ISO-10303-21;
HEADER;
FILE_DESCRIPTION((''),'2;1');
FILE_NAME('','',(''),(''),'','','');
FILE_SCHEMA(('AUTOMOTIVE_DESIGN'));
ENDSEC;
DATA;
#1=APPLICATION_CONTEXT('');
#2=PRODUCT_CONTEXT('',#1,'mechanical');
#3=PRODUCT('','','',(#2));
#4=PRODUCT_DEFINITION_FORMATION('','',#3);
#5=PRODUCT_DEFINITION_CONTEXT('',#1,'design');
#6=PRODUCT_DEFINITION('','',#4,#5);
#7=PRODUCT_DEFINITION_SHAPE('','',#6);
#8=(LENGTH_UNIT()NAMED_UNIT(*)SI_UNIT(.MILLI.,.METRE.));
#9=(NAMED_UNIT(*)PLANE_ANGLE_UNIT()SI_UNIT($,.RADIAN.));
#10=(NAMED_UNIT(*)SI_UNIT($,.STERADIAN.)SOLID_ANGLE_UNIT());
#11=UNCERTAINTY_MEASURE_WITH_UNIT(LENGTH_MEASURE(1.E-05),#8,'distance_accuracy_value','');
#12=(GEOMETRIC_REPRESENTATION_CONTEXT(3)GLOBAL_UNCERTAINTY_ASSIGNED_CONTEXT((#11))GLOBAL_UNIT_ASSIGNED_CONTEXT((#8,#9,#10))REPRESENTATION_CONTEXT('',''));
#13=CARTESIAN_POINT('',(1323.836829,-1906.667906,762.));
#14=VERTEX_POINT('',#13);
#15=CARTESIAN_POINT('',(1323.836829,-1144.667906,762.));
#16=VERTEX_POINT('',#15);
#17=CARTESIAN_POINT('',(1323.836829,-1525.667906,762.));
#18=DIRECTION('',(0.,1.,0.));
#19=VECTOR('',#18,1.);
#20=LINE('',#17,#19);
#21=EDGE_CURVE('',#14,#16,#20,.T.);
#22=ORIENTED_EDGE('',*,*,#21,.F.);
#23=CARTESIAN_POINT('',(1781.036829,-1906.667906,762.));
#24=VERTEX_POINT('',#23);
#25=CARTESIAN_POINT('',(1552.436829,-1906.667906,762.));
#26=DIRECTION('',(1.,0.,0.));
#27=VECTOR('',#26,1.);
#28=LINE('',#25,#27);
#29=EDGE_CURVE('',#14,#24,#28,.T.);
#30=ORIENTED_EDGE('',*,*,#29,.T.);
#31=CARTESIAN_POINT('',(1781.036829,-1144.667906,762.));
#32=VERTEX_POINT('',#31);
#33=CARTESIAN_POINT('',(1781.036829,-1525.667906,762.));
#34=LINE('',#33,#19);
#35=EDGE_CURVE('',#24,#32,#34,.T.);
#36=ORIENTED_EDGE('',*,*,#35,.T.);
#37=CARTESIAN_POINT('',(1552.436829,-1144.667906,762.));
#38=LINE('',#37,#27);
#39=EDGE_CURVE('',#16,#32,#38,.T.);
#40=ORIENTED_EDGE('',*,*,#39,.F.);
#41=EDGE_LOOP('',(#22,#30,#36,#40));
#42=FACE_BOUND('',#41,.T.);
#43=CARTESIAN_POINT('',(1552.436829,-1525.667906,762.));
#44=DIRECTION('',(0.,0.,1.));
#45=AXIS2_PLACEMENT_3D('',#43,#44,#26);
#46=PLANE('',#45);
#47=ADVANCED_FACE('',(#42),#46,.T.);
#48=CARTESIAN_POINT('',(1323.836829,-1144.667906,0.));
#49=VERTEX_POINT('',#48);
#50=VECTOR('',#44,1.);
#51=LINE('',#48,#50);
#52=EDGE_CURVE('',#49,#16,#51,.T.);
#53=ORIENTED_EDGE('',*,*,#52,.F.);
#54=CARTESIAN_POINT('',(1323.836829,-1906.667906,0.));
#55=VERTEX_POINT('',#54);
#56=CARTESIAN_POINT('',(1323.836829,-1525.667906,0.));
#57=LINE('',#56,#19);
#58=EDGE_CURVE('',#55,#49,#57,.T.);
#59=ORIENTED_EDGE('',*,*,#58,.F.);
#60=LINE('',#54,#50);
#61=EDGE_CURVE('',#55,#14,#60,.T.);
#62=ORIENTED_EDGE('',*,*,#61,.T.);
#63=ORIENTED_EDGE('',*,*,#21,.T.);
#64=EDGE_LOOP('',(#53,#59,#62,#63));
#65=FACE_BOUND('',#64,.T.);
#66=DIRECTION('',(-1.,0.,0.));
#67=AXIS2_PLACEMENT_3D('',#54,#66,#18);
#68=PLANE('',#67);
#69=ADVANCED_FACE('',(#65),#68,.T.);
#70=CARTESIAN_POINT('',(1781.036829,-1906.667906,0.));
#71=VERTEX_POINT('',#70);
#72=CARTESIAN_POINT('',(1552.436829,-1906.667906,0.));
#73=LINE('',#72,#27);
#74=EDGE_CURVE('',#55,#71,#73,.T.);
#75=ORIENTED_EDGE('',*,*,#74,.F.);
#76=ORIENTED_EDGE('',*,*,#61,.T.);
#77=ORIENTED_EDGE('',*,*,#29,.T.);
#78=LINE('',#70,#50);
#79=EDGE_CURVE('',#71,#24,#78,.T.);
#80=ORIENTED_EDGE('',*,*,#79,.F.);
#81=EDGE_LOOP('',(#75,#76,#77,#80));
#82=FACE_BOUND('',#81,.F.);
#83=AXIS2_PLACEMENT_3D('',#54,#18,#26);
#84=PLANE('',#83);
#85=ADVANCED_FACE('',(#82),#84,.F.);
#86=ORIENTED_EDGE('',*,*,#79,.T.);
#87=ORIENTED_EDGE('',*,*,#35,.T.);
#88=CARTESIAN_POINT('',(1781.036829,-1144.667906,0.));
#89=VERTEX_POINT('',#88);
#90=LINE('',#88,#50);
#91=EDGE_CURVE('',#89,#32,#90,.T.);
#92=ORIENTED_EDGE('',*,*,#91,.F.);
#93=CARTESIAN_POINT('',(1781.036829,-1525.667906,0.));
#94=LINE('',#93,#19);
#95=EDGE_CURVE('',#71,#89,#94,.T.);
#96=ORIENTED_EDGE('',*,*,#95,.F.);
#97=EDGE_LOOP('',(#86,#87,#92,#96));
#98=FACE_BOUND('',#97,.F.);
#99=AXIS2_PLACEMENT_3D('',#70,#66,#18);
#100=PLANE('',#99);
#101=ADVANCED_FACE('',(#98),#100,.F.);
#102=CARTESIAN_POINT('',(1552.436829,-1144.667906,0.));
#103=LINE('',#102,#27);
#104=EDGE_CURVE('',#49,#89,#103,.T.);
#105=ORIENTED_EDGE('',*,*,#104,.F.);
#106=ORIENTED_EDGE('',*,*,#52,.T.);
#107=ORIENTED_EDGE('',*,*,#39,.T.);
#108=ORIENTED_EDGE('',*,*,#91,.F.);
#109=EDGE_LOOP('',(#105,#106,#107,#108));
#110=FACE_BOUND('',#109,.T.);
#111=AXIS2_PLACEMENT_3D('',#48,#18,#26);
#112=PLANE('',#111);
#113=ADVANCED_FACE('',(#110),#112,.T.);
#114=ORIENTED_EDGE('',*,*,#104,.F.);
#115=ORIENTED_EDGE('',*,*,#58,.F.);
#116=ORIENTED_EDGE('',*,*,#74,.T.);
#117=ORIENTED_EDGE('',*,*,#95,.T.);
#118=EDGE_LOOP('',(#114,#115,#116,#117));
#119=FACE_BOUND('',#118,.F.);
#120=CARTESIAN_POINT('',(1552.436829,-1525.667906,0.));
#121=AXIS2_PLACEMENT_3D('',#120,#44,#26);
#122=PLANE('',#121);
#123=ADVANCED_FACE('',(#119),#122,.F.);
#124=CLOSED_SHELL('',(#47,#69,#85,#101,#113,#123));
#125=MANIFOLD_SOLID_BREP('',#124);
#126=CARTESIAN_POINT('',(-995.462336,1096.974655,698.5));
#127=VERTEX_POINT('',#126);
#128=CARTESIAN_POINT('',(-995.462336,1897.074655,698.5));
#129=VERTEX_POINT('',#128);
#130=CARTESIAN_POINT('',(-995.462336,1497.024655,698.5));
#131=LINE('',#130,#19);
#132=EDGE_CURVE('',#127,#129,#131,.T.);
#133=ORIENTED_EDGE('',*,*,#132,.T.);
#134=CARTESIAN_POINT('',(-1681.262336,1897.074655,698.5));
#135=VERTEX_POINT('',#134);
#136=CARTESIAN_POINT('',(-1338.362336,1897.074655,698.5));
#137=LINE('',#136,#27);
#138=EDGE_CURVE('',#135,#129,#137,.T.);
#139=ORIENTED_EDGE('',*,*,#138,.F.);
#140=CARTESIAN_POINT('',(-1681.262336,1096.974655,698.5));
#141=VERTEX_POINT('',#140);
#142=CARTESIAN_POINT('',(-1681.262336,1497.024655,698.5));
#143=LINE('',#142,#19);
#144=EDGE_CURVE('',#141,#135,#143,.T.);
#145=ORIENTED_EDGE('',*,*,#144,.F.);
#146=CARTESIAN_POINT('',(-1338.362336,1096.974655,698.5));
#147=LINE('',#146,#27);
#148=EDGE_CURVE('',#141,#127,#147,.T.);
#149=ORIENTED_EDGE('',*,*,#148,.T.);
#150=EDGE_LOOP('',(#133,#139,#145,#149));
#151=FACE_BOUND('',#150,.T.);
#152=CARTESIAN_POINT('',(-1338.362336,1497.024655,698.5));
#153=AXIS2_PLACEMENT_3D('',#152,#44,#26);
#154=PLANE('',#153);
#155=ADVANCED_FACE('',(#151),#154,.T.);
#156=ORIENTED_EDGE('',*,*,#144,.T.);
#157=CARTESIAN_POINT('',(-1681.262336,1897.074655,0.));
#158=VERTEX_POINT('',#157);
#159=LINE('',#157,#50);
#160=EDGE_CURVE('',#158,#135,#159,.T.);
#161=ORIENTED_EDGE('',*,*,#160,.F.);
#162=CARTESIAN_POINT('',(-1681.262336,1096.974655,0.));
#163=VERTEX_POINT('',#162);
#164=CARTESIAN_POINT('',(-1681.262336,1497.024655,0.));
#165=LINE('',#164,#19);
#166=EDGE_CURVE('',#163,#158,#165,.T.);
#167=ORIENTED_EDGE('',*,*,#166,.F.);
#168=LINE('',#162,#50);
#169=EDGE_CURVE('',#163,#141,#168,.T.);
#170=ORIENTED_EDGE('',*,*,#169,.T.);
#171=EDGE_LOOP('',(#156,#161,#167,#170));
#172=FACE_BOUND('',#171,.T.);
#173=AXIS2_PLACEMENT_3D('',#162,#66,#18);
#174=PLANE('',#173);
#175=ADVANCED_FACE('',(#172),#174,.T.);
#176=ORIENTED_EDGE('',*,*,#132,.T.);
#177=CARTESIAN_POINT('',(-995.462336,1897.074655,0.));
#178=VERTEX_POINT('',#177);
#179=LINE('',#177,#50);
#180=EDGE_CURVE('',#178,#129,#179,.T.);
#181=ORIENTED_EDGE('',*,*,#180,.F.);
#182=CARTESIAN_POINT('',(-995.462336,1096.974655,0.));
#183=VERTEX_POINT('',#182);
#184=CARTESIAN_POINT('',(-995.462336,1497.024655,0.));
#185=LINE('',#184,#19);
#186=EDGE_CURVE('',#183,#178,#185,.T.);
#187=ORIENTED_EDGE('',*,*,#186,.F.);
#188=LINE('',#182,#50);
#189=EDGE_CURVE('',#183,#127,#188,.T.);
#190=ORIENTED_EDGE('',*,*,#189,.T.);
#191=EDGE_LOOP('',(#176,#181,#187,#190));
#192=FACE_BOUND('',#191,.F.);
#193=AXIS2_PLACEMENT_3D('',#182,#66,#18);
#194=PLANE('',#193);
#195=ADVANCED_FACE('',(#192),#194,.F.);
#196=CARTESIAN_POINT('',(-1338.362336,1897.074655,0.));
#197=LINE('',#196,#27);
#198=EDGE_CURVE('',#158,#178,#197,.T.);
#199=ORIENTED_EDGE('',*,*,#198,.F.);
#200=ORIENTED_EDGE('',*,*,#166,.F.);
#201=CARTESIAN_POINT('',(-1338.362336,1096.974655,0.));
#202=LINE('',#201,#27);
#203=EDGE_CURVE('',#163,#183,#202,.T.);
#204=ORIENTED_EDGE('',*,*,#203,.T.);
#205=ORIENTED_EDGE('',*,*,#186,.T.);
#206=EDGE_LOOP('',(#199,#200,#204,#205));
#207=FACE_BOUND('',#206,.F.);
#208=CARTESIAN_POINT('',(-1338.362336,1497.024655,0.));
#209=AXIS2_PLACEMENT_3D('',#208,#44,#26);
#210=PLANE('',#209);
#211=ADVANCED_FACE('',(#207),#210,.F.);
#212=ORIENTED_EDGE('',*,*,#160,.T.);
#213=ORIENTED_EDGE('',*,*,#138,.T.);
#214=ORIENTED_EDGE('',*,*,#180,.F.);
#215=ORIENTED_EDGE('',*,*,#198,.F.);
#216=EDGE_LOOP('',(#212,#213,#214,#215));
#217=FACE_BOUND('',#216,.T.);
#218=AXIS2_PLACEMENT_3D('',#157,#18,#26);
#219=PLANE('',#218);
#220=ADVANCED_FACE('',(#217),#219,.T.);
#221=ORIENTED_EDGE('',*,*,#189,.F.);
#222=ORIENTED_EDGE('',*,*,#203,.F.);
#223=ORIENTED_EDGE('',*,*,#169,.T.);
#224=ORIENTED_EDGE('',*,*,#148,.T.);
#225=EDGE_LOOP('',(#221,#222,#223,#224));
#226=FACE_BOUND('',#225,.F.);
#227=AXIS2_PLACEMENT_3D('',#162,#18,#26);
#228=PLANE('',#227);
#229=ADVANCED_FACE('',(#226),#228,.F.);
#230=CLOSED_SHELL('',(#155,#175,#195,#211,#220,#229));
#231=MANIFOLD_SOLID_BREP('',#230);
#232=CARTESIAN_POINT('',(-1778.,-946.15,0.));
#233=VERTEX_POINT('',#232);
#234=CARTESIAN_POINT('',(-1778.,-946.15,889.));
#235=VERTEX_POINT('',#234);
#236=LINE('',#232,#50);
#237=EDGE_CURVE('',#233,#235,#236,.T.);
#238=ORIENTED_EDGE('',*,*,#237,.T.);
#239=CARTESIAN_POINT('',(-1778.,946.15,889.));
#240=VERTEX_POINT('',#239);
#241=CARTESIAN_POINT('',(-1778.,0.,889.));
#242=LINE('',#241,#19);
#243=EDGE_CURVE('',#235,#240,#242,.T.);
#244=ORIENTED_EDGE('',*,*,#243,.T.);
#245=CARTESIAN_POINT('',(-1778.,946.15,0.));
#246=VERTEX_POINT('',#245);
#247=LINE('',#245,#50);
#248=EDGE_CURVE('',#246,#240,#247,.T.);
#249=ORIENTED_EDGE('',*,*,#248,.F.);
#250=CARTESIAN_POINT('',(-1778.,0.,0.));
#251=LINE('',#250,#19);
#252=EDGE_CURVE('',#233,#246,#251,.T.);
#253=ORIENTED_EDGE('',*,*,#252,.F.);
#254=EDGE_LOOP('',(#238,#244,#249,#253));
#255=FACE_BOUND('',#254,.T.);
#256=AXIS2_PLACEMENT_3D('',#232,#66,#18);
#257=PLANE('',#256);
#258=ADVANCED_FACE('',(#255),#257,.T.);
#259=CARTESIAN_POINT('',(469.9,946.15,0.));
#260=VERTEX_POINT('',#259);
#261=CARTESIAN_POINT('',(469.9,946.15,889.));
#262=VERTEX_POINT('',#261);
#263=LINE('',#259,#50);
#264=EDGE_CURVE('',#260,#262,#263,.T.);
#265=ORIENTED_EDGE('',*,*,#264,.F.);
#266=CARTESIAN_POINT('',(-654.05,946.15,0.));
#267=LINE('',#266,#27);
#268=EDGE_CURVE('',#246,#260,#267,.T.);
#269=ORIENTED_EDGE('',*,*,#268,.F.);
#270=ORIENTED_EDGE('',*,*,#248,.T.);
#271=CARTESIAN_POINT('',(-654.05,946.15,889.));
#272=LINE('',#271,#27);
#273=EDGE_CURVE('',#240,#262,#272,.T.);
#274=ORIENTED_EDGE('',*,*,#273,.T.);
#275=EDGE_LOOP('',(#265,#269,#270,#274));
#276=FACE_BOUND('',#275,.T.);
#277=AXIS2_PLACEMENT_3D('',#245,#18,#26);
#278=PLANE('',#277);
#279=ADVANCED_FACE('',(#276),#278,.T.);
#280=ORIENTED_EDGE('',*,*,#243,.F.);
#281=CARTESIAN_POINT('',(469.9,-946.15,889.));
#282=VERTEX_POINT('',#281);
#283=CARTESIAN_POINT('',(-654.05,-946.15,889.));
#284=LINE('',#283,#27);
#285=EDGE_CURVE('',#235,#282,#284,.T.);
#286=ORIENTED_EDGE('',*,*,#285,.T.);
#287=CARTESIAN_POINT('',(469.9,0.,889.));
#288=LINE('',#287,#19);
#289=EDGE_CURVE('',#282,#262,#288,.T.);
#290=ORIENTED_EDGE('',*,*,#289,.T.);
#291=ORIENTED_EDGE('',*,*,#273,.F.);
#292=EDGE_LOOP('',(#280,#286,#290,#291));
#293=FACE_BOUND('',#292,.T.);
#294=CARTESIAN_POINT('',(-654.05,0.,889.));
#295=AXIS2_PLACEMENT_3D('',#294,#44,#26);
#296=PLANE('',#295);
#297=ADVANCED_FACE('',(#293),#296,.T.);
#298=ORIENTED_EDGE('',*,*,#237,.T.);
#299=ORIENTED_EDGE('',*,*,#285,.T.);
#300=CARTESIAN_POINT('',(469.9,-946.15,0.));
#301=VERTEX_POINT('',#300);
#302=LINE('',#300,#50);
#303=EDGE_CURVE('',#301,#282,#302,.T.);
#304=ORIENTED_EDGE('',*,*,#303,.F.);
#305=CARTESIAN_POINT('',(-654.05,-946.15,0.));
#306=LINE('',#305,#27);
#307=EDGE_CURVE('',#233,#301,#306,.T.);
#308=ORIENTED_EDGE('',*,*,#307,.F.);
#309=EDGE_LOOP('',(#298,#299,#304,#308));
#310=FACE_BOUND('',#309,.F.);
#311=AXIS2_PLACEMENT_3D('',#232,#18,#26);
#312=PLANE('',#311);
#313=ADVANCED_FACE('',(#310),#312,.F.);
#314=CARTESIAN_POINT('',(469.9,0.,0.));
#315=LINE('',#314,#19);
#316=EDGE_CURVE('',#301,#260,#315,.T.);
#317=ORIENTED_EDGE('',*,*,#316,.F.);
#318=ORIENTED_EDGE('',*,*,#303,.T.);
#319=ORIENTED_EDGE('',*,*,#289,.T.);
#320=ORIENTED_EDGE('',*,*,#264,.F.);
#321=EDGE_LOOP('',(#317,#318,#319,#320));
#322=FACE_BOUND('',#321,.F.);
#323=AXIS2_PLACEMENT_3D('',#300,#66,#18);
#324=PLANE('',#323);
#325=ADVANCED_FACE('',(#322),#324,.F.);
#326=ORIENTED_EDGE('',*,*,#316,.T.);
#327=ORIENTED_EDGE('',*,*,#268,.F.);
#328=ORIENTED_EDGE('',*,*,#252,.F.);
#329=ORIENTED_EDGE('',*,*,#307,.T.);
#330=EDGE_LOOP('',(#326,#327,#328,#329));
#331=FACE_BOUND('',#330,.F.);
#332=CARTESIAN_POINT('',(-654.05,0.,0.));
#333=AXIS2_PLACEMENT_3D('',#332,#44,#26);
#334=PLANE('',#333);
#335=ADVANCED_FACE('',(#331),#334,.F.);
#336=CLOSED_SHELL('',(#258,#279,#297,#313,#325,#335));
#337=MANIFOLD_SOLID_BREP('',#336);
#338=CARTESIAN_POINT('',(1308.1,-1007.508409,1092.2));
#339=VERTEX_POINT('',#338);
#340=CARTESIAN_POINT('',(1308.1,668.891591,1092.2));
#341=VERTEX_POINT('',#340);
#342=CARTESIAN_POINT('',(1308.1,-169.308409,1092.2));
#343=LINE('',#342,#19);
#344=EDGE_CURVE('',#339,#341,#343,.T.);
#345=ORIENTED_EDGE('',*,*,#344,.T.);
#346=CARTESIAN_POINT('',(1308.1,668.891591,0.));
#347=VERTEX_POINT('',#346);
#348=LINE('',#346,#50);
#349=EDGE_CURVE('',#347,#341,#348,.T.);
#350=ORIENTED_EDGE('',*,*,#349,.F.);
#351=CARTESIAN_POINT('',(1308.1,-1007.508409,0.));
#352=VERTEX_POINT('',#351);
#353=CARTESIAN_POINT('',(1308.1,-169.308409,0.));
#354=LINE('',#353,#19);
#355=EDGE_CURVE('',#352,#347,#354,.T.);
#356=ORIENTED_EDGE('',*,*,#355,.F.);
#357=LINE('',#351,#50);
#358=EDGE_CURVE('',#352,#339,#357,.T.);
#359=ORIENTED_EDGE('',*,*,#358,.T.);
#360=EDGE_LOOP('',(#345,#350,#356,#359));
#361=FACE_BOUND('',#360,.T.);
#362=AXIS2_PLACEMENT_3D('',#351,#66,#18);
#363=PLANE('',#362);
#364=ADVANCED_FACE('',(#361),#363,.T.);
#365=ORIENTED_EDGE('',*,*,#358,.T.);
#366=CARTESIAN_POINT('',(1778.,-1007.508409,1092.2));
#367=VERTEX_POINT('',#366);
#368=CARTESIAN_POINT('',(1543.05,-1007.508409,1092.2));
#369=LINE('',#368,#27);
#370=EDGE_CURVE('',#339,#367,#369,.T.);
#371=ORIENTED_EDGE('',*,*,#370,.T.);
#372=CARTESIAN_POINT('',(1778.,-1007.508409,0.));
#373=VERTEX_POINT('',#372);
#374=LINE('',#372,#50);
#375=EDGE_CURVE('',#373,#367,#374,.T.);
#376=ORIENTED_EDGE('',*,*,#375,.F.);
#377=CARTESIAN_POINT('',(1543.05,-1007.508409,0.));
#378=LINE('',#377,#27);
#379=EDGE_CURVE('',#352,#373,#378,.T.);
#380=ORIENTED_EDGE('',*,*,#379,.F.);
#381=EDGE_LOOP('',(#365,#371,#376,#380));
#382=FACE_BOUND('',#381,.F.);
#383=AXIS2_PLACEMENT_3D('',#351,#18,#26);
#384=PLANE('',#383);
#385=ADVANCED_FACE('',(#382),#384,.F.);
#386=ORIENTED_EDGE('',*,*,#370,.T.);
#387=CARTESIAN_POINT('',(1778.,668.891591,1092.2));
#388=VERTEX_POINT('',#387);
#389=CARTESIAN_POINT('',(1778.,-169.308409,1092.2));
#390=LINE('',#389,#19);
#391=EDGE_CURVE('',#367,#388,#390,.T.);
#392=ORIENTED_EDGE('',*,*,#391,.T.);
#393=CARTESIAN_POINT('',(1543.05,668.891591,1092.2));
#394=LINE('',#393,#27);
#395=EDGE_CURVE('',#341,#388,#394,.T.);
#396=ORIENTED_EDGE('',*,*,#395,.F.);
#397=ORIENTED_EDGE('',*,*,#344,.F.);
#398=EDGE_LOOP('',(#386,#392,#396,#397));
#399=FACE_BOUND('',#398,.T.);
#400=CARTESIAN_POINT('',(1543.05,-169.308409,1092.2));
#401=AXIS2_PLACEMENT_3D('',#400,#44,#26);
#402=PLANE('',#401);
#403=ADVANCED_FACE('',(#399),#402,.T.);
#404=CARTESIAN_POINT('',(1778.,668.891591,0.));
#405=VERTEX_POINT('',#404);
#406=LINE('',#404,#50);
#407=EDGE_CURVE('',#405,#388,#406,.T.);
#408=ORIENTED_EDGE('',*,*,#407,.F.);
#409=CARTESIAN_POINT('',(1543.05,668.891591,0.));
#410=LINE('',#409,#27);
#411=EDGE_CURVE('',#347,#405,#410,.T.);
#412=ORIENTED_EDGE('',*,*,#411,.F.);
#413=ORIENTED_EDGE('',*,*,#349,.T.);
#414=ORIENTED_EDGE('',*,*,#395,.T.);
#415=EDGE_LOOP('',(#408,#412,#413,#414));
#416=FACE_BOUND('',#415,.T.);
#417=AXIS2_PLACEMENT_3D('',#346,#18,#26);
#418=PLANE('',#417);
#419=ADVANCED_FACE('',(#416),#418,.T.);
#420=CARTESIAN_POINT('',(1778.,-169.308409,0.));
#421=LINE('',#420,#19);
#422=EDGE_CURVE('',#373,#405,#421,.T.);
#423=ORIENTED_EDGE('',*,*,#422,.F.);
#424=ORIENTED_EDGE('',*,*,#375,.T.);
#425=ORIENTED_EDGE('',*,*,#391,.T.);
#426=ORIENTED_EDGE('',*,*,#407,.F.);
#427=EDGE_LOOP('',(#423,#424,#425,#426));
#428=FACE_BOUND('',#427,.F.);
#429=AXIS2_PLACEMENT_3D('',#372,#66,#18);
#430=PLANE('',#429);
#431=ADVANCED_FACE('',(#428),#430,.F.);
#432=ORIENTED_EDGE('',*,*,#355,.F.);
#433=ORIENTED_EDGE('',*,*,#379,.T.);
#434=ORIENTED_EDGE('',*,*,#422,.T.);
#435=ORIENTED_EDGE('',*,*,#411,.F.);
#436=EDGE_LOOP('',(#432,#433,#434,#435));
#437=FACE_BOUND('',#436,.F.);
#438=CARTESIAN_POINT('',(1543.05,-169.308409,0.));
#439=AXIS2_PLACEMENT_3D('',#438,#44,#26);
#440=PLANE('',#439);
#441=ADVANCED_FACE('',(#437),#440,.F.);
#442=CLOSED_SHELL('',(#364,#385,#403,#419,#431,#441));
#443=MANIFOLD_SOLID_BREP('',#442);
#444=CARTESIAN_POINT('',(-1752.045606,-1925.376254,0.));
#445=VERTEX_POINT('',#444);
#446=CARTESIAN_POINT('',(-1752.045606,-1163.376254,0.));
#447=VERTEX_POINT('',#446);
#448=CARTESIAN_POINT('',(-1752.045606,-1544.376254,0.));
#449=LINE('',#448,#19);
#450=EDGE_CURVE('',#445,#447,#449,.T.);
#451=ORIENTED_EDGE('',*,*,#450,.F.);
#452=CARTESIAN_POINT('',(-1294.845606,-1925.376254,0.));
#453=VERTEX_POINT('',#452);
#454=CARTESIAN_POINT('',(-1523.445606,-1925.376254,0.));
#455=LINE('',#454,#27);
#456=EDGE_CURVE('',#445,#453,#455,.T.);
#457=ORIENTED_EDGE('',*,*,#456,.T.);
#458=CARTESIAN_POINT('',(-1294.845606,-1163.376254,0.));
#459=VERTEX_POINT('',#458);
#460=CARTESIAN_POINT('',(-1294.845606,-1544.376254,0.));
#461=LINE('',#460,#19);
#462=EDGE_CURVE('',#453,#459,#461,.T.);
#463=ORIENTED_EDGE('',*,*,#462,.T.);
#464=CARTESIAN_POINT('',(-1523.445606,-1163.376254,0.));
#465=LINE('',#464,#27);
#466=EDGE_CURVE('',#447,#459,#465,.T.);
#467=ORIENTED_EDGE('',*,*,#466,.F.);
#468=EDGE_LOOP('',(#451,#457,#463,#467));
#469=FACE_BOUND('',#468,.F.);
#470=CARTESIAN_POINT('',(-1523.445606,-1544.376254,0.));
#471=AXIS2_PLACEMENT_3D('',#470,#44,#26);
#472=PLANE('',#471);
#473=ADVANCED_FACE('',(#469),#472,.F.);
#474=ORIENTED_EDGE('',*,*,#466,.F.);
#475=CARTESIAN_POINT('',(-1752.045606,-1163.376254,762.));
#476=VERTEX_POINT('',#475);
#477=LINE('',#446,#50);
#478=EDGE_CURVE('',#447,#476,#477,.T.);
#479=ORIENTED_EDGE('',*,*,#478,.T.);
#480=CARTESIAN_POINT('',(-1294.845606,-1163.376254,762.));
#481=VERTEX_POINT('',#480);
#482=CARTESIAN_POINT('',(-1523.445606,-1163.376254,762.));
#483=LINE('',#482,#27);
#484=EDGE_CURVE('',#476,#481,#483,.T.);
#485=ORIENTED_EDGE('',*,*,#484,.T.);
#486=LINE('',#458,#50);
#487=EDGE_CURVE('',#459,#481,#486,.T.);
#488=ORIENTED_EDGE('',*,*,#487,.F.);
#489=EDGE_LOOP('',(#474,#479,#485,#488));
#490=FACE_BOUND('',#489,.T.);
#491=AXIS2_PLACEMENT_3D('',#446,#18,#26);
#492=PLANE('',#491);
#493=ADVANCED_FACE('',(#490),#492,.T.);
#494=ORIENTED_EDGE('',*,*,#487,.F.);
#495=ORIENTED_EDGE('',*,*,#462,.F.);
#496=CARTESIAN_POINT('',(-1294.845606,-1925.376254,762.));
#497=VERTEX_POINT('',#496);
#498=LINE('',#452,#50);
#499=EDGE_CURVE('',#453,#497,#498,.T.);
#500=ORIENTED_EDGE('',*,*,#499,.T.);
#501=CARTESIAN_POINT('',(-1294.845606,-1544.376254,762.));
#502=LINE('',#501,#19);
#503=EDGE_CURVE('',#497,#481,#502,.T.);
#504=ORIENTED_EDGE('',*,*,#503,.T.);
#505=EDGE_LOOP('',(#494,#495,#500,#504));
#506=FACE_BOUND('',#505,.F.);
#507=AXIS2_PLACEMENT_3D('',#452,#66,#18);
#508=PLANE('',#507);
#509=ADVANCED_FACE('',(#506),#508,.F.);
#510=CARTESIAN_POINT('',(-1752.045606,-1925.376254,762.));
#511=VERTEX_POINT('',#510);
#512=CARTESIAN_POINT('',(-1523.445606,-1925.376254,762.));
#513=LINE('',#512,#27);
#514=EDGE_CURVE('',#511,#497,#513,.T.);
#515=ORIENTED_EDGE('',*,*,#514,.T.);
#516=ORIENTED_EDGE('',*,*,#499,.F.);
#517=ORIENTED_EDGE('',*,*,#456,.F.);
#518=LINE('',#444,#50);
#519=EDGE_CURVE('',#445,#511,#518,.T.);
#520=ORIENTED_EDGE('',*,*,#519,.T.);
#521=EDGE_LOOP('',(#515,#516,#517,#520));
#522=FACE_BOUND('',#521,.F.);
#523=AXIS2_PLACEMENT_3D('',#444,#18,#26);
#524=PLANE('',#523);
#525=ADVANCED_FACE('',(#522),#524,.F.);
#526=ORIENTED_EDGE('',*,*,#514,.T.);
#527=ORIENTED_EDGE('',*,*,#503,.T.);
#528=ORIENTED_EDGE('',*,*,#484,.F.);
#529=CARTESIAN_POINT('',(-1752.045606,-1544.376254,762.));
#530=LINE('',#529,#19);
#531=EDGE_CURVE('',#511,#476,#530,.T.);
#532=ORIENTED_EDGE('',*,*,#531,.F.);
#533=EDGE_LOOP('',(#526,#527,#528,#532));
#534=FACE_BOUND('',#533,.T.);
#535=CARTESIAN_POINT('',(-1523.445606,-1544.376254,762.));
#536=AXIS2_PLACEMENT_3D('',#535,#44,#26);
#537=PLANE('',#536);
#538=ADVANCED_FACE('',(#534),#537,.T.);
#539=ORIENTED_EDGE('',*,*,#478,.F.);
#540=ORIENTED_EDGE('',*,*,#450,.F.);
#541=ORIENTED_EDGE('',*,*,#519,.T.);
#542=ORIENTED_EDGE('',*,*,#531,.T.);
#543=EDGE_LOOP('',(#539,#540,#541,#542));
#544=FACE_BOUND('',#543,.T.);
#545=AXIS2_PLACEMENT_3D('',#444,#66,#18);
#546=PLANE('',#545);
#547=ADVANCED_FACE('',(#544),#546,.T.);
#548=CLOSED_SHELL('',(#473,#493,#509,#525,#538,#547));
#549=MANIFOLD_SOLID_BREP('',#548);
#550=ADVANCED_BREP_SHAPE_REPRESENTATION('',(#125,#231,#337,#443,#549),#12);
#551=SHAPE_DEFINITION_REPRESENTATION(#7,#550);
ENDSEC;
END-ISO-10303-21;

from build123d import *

# Parameters (mm, degrees)
F0_W     = 457.2
F0_H     = 762
F2_DEPTH = 762
F0_W_2   = 2247.9
F0_H_2   = 1892.3
F3_DEPTH = 889
F0_W_3   = 469.9
F0_H_3   = 1676.4
F5_DEPTH = 1092.2
F0_W_4   = 685.8
F0_H_4   = 800.1
F6_DEPTH = 698.5


# Not quite as in the source:
# - the program builds the solid bodies; features that only make, move or delete a surface that nothing else refers to are left out


with BuildPart() as f2:
    # F0 (on Top) → F2 (new body)
    with BuildSketch(Plane.XY):
        with Locations((-1523.4456062317, -1544.3762540817)):
            Rectangle(F0_W, F0_H)
    extrude(amount=F2_DEPTH)


with BuildPart() as f2b:
    # F0 (on Top) → F2, piece 2 (new body)
    with BuildSketch(Plane.XY):
        with Locations((1552.4368286133, -1525.6679058075)):
            Rectangle(F0_W, F0_H)
    extrude(amount=F2_DEPTH)


with BuildPart() as f3:
    # F0 (on Top) → F3 (new body)
    with BuildSketch(Plane.XY):
        with Locations((-654.05, 0)):
            Rectangle(F0_W_2, F0_H_2)
    extrude(amount=F3_DEPTH)


with BuildPart() as f5:
    # F0 (on Top) → F5 (new body)
    with BuildSketch(Plane.XY):
        with Locations((1543.05, -169.3084090948)):
            Rectangle(F0_W_3, F0_H_3)
    extrude(amount=F5_DEPTH)


with BuildPart() as f6:
    # F0 (on Top) → F6 (new body)
    with BuildSketch(Plane.XY):
        with Locations((-1338.3623361588, 1497.0246553421)):
            Rectangle(F0_W_4, F0_H_4)
    extrude(amount=F6_DEPTH)


solid = Compound([f2.part, f2b.part, f3.part, f5.part, f6.part])
